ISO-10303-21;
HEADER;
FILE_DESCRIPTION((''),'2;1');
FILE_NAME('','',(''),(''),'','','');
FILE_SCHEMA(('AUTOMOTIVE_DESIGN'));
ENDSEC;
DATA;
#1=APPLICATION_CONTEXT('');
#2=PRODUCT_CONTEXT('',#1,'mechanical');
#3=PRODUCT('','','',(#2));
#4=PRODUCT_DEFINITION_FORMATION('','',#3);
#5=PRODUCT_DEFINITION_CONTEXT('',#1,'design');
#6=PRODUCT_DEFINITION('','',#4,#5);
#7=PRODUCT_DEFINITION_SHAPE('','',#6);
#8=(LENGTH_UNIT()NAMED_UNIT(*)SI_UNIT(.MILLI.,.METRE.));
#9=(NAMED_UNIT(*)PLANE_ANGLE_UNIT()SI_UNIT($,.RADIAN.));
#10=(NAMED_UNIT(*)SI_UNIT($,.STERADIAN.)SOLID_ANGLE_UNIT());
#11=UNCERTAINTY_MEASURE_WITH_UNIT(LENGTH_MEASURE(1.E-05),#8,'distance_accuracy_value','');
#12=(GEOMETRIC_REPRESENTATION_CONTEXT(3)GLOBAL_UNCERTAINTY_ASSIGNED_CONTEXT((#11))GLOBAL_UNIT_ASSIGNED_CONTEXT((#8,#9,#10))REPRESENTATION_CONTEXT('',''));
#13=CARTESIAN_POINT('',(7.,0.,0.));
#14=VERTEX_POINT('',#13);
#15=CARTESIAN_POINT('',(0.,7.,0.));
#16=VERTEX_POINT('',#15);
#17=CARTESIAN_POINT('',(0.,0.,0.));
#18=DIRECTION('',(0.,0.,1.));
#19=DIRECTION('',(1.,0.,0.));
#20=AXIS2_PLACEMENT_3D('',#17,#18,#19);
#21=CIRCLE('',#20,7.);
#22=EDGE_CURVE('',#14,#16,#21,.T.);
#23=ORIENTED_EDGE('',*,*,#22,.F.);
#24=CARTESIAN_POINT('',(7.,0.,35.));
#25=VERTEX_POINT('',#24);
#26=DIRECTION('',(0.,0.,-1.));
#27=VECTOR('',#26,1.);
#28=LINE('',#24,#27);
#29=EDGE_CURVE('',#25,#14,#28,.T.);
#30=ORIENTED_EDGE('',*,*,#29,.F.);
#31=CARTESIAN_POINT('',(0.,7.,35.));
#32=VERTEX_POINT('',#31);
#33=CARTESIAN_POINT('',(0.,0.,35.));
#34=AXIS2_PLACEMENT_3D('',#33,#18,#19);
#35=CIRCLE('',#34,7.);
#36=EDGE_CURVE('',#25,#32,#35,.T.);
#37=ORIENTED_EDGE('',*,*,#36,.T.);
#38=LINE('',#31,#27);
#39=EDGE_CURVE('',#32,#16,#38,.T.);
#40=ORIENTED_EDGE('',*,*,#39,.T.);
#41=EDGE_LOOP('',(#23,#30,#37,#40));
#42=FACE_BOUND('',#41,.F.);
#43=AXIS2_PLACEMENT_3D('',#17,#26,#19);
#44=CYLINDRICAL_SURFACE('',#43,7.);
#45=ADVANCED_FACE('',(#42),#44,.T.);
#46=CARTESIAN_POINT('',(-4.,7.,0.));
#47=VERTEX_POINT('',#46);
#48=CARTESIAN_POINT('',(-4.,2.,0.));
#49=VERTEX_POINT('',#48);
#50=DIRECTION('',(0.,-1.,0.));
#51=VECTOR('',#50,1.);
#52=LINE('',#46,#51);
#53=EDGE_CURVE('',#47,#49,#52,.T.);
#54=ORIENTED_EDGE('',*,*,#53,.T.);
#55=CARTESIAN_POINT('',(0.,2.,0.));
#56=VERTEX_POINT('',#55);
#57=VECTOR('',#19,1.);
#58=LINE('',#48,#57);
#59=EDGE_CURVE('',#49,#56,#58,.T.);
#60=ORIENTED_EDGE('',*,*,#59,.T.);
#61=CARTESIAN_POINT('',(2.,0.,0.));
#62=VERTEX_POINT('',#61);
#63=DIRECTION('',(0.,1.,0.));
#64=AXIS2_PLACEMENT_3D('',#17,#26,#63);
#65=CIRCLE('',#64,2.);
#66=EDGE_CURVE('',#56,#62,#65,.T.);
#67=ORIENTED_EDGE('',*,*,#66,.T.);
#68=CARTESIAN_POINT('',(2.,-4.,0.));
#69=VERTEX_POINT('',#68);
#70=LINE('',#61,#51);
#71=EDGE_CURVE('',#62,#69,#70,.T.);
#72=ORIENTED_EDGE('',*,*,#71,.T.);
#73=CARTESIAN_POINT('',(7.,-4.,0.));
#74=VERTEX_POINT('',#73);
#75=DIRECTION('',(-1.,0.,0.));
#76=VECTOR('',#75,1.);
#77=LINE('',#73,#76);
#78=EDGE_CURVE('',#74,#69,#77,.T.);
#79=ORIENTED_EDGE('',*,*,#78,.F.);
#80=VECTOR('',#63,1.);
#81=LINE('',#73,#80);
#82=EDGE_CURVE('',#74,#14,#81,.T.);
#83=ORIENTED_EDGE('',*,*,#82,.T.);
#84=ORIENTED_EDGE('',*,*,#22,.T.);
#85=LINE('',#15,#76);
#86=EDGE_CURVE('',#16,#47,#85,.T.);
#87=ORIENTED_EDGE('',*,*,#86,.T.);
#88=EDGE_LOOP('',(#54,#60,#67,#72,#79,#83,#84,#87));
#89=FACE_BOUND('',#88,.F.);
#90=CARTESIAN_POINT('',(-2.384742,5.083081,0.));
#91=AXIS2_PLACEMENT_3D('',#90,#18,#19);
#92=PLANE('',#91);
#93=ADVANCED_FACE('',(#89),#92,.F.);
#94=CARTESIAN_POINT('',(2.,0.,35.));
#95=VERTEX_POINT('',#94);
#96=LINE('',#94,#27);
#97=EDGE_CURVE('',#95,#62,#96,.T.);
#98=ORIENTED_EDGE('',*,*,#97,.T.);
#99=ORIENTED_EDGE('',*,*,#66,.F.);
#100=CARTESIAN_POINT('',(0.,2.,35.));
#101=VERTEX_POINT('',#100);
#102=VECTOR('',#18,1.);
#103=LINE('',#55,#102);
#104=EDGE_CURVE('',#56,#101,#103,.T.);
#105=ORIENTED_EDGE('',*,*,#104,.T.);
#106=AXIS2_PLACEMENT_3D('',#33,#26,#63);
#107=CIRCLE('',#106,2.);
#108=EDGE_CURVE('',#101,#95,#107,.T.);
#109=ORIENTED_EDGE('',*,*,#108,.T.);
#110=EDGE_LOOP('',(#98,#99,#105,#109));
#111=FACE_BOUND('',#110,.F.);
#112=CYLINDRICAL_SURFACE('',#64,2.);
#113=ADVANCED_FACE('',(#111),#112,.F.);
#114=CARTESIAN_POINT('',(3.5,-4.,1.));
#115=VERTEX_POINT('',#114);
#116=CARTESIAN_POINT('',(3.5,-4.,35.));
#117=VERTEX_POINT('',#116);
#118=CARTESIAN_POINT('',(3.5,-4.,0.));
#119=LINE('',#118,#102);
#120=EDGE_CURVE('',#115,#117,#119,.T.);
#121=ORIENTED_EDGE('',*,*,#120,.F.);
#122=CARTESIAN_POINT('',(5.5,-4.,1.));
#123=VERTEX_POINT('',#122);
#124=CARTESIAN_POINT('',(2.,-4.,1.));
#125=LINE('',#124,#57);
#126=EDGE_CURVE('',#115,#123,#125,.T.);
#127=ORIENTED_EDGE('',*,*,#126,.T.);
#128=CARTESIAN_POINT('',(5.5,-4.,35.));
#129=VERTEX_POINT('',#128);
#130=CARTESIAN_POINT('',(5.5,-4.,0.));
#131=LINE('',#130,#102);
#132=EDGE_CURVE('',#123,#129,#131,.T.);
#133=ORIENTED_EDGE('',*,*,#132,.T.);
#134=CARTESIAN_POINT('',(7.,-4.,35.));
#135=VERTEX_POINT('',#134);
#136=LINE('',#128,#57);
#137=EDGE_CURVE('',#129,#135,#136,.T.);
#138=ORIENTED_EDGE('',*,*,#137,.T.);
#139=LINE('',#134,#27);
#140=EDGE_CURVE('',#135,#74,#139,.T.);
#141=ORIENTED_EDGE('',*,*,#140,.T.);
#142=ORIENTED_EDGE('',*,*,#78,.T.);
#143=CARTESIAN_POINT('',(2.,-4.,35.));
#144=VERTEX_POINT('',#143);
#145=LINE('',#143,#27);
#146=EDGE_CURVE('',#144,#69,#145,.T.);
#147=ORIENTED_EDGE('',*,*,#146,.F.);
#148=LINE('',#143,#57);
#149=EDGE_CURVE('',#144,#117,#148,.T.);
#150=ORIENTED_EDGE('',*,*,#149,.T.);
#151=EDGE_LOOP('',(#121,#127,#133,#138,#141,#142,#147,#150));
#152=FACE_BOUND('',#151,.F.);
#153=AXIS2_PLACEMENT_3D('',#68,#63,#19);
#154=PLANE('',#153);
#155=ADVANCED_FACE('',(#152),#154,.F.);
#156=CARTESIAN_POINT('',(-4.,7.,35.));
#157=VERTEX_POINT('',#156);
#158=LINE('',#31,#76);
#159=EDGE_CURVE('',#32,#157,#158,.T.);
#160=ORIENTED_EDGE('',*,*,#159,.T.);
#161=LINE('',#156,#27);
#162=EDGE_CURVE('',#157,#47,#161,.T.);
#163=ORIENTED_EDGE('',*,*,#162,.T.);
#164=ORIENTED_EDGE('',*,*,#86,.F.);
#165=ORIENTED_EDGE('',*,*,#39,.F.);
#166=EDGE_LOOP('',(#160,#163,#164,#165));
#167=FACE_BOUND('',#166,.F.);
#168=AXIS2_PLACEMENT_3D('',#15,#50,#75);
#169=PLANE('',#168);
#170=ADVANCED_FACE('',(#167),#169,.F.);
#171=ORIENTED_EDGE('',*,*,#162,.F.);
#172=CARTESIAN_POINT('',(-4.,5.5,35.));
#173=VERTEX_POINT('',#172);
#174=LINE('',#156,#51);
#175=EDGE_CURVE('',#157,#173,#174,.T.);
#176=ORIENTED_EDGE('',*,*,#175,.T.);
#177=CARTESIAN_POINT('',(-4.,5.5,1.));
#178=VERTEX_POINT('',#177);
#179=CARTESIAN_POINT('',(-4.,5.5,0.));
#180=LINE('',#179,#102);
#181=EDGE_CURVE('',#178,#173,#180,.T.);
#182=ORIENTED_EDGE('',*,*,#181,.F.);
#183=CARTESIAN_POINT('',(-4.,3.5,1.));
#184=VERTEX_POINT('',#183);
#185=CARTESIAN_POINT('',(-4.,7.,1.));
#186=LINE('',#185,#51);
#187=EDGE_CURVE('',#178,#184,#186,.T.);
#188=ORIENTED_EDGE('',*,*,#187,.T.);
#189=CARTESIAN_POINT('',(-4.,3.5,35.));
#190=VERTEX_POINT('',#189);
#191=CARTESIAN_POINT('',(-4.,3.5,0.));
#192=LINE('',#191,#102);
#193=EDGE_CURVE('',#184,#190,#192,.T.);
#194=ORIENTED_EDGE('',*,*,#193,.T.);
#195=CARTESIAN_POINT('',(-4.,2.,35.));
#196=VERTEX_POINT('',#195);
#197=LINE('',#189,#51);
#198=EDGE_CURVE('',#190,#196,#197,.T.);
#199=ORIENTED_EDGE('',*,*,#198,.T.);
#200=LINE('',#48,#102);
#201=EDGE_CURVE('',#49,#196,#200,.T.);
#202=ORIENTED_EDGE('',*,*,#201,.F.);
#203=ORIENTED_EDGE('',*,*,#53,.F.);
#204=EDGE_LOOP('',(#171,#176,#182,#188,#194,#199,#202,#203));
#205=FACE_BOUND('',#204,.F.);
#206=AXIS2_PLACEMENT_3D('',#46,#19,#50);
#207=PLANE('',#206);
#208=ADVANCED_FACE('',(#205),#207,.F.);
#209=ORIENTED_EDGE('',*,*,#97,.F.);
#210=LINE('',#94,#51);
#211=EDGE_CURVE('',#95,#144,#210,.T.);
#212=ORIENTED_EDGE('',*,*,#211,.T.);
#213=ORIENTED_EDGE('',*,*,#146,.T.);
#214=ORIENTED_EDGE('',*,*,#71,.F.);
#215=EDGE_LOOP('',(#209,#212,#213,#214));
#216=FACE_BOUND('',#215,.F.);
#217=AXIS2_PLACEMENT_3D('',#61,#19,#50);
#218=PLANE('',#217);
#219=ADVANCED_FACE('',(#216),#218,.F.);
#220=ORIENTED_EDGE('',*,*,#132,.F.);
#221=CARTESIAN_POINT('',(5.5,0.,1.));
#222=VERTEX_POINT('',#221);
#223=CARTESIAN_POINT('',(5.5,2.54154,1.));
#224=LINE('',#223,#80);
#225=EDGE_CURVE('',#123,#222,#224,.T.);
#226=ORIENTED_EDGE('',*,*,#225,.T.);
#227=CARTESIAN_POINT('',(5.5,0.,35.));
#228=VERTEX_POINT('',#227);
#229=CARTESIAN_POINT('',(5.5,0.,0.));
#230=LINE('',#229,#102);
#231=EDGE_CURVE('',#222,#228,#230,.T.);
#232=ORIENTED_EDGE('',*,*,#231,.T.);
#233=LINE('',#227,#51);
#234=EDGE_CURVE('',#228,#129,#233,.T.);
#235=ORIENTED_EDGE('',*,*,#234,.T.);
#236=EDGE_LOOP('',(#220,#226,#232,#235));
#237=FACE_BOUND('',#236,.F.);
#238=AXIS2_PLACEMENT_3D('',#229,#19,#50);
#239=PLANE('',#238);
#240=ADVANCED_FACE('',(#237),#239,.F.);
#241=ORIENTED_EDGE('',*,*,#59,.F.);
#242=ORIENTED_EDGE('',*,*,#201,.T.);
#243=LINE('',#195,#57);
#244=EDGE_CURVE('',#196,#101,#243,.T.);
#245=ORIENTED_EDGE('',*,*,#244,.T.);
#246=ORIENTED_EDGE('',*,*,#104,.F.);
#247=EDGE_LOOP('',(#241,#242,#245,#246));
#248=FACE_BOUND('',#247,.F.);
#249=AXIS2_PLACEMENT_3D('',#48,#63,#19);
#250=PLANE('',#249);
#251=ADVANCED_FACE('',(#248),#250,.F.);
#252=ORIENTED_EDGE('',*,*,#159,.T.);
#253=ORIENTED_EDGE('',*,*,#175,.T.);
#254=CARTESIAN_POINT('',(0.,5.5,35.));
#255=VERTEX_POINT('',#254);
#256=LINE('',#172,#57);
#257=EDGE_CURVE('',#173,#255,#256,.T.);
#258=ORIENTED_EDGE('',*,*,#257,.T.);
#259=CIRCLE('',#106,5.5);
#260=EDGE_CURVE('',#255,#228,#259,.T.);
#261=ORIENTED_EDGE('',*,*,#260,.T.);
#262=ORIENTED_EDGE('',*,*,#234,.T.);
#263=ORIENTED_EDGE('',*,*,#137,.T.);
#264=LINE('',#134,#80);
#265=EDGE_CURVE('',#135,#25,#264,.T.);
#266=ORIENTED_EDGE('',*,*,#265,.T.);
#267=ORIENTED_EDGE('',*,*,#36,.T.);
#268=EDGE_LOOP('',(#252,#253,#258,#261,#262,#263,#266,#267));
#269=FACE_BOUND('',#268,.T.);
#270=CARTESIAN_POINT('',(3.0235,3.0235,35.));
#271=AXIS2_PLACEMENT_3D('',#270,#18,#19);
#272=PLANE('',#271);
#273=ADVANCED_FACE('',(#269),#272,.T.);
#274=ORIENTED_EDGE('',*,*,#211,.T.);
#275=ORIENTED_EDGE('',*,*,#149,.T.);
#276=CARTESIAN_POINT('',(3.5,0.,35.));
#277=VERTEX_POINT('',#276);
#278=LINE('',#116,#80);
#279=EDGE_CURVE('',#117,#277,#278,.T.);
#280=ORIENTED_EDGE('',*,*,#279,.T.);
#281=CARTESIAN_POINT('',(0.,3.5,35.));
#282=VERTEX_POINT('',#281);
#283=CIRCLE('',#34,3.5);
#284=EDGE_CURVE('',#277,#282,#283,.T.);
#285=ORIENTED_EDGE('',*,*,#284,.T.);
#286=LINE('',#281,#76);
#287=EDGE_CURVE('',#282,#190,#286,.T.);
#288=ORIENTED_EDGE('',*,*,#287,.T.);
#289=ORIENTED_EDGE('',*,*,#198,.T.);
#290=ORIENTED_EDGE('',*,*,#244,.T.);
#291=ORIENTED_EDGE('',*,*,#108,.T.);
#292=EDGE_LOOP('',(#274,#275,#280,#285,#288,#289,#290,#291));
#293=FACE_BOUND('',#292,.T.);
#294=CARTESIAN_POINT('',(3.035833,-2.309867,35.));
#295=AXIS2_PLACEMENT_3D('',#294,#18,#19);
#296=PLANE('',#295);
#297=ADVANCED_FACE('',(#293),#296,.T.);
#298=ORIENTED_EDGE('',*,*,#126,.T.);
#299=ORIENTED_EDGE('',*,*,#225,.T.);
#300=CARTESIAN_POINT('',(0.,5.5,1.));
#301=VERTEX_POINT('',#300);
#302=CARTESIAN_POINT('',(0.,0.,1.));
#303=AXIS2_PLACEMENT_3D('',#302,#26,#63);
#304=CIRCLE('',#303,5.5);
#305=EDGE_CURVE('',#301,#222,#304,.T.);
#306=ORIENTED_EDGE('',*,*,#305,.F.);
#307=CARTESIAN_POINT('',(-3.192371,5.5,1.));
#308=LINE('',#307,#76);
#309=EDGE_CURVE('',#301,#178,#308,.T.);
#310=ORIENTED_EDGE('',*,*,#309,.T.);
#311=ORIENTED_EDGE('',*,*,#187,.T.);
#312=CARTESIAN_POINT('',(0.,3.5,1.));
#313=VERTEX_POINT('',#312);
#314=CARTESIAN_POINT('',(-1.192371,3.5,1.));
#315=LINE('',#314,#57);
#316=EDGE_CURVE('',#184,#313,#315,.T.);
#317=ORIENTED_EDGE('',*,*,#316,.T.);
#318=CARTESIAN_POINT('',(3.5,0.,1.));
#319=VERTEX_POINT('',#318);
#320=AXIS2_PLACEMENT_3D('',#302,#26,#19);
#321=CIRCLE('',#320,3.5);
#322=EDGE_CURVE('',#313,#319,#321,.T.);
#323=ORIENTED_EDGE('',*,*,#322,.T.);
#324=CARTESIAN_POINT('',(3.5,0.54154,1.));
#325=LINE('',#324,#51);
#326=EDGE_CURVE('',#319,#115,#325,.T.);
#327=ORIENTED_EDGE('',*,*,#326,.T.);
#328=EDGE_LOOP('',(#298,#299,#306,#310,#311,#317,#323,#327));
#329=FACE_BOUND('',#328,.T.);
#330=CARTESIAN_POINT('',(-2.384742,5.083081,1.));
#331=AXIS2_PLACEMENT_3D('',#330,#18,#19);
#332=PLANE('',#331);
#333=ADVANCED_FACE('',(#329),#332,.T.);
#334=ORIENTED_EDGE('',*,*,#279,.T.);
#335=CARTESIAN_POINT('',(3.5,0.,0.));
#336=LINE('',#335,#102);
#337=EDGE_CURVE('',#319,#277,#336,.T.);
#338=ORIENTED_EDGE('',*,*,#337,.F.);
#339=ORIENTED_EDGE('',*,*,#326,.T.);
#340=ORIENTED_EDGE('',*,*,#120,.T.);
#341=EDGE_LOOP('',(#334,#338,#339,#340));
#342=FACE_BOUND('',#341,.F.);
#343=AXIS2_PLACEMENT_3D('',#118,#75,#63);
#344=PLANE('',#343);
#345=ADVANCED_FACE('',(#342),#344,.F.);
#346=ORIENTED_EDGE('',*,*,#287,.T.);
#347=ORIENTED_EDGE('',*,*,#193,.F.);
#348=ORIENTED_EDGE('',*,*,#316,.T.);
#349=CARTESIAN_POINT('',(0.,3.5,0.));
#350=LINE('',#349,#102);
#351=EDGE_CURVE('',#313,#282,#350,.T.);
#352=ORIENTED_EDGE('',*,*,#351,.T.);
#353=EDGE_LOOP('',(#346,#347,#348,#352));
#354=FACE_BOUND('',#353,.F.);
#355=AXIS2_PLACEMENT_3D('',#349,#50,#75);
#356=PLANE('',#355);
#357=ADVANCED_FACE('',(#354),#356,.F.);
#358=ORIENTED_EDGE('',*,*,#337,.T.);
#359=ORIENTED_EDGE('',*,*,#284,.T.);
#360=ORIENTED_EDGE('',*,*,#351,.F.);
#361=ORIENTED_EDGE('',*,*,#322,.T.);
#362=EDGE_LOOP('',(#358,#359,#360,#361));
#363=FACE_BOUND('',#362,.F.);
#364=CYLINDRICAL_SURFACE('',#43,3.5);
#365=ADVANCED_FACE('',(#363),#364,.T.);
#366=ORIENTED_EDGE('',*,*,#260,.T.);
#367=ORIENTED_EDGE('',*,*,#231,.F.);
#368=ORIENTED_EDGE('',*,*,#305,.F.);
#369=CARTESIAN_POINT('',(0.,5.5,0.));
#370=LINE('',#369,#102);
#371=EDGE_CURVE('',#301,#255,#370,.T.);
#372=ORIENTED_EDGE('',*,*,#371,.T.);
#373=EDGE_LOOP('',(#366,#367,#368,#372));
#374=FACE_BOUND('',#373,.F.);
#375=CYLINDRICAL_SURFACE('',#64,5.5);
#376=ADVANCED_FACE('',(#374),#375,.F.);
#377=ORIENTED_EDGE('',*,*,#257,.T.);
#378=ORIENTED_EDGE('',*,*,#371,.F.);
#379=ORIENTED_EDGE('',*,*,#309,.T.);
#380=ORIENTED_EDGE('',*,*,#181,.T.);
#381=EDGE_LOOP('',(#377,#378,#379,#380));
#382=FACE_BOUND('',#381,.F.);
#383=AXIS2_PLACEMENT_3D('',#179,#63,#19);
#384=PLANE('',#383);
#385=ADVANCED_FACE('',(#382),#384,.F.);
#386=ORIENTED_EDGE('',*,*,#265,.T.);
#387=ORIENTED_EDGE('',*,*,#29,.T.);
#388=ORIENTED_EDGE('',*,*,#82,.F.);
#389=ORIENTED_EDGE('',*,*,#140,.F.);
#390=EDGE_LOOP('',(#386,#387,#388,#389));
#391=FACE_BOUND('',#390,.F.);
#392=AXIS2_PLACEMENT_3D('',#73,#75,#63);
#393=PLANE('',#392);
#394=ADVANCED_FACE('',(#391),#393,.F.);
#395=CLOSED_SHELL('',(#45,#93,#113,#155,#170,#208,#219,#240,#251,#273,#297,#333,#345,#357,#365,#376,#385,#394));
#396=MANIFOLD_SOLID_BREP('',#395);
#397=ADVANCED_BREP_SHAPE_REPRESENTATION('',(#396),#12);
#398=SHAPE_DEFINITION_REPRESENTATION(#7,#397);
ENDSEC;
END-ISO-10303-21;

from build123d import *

# Parameters (mm, degrees)
F2_DEPTH = 1
F3_DEPTH = 35


# Not quite as in the source:
# - a feature names something its author has since deleted; it is built from what else it names


with BuildPart() as f2:
    # F1 (on Top) → F2 (new body)
    with BuildSketch(Plane.XY):
        with BuildLine():
            Line((-4, 5.5), (-4, 3.7749172176))
            ThreePointArc((-4, 3.7749172176), (-2.1780674121, 5.0503487353), (0, 5.5))
            Line((0, 5.5), (-4, 5.5))
        make_face()
        with BuildLine():
            ThreePointArc((5.5, 0), (5.0503487353, -2.1780674121), (3.7749172176, -4))
            Line((3.7749172176, -4), (5.5, -4))
            Line((5.5, -4), (5.5, 0))
        make_face()
        with BuildLine():
            Line((-4, 7), (-4, 5.7445626465))
            ThreePointArc((-4, 5.7445626465), (-2.0961943462, 6.6787700412), (0, 7))
            Line((0, 7), (-4, 7))
        make_face()
        with BuildLine():
            ThreePointArc((7, 0), (6.6787700412, -2.0961943462), (5.7445626465, -4))
            Line((5.7445626465, -4), (7, -4))
            Line((7, -4), (7, 0))
        make_face()
        with BuildLine():
            Line((-4, 2), (-2.8722813233, 2))
            ThreePointArc((-2.8722813233, 2), (-1.6201851746, 3.1024184115), (0, 3.5))
            Line((0, 3.5), (-4, 3.5))
            Line((-4, 3.5), (-4, 2))
        make_face()
        with BuildLine():
            ThreePointArc((3.5, 0), (3.1024184115, -1.6201851746), (2, -2.8722813233))
            Line((2, -2.8722813233), (2, -4))
            Line((2, -4), (3.5, -4))
            Line((3.5, -4), (3.5, 0))
        make_face()
        with BuildLine():
            ThreePointArc((0, 2), (1.4142135624, 1.4142135624), (2, 0))
            Line((2, 0), (2, -2.8722813233))
            ThreePointArc((2, -2.8722813233), (3.1024184115, -1.6201851746), (3.5, 0))
            ThreePointArc((3.5, 0), (2.4748737342, 2.4748737342), (0, 3.5))
            ThreePointArc((0, 3.5), (-1.6201851746, 3.1024184115), (-2.8722813233, 2))
            Line((-2.8722813233, 2), (0, 2))
        make_face()
        with BuildLine():
            ThreePointArc((0, 3.5), (2.4748737342, 2.4748737342), (3.5, 0))
            Line((3.5, 0), (3.5, -4))
            Line((3.5, -4), (3.7749172176, -4))
            ThreePointArc((3.7749172176, -4), (5.0503487353, -2.1780674121), (5.5, 0))
            ThreePointArc((5.5, 0), (3.8890872965, 3.8890872965), (0, 5.5))
            ThreePointArc((0, 5.5), (-2.1780674121, 5.0503487353), (-4, 3.7749172176))
            Line((-4, 3.7749172176), (-4, 3.5))
            Line((-4, 3.5), (0, 3.5))
        make_face()
        with BuildLine():
            ThreePointArc((0, 5.5), (3.8890872965, 3.8890872965), (5.5, 0))
            Line((5.5, 0), (5.5, -4))
            Line((5.5, -4), (5.7445626465, -4))
            ThreePointArc((5.7445626465, -4), (6.6787700412, -2.0961943462), (7, 0))
            ThreePointArc((7, 0), (4.9497474683, 4.9497474683), (0, 7))
            ThreePointArc((0, 7), (-2.0961943462, 6.6787700412), (-4, 5.7445626465))
            Line((-4, 5.7445626465), (-4, 5.5))
            Line((-4, 5.5), (0, 5.5))
        make_face()
    extrude(amount=F2_DEPTH)

    # F1 (on Top) → F3 (join)
    with BuildSketch(Plane.XY):
        with BuildLine():
            ThreePointArc((0, 5.5), (3.8890872965, 3.8890872965), (5.5, 0))
            Line((5.5, 0), (5.5, -4))
            Line((5.5, -4), (5.7445626465, -4))
            ThreePointArc((5.7445626465, -4), (6.6787700412, -2.0961943462), (7, 0))
            ThreePointArc((7, 0), (4.9497474683, 4.9497474683), (0, 7))
            ThreePointArc((0, 7), (-2.0961943462, 6.6787700412), (-4, 5.7445626465))
            Line((-4, 5.7445626465), (-4, 5.5))
            Line((-4, 5.5), (0, 5.5))
        make_face()
        with BuildLine():
            Line((-4, 7), (-4, 5.7445626465))
            ThreePointArc((-4, 5.7445626465), (-2.0961943462, 6.6787700412), (0, 7))
            Line((0, 7), (-4, 7))
        make_face()
        with BuildLine():
            ThreePointArc((7, 0), (6.6787700412, -2.0961943462), (5.7445626465, -4))
            Line((5.7445626465, -4), (7, -4))
            Line((7, -4), (7, 0))
        make_face()
        with BuildLine():
            ThreePointArc((3.5, 0), (3.1024184115, -1.6201851746), (2, -2.8722813233))
            Line((2, -2.8722813233), (2, -4))
            Line((2, -4), (3.5, -4))
            Line((3.5, -4), (3.5, 0))
        make_face()
        with BuildLine():
            ThreePointArc((0, 2), (1.4142135624, 1.4142135624), (2, 0))
            Line((2, 0), (2, -2.8722813233))
            ThreePointArc((2, -2.8722813233), (3.1024184115, -1.6201851746), (3.5, 0))
            ThreePointArc((3.5, 0), (2.4748737342, 2.4748737342), (0, 3.5))
            ThreePointArc((0, 3.5), (-1.6201851746, 3.1024184115), (-2.8722813233, 2))
            Line((-2.8722813233, 2), (0, 2))
        make_face()
        with BuildLine():
            Line((-4, 2), (-2.8722813233, 2))
            ThreePointArc((-2.8722813233, 2), (-1.6201851746, 3.1024184115), (0, 3.5))
            Line((0, 3.5), (-4, 3.5))
            Line((-4, 3.5), (-4, 2))
        make_face()
    extrude(amount=F3_DEPTH)


solid = f2.part
